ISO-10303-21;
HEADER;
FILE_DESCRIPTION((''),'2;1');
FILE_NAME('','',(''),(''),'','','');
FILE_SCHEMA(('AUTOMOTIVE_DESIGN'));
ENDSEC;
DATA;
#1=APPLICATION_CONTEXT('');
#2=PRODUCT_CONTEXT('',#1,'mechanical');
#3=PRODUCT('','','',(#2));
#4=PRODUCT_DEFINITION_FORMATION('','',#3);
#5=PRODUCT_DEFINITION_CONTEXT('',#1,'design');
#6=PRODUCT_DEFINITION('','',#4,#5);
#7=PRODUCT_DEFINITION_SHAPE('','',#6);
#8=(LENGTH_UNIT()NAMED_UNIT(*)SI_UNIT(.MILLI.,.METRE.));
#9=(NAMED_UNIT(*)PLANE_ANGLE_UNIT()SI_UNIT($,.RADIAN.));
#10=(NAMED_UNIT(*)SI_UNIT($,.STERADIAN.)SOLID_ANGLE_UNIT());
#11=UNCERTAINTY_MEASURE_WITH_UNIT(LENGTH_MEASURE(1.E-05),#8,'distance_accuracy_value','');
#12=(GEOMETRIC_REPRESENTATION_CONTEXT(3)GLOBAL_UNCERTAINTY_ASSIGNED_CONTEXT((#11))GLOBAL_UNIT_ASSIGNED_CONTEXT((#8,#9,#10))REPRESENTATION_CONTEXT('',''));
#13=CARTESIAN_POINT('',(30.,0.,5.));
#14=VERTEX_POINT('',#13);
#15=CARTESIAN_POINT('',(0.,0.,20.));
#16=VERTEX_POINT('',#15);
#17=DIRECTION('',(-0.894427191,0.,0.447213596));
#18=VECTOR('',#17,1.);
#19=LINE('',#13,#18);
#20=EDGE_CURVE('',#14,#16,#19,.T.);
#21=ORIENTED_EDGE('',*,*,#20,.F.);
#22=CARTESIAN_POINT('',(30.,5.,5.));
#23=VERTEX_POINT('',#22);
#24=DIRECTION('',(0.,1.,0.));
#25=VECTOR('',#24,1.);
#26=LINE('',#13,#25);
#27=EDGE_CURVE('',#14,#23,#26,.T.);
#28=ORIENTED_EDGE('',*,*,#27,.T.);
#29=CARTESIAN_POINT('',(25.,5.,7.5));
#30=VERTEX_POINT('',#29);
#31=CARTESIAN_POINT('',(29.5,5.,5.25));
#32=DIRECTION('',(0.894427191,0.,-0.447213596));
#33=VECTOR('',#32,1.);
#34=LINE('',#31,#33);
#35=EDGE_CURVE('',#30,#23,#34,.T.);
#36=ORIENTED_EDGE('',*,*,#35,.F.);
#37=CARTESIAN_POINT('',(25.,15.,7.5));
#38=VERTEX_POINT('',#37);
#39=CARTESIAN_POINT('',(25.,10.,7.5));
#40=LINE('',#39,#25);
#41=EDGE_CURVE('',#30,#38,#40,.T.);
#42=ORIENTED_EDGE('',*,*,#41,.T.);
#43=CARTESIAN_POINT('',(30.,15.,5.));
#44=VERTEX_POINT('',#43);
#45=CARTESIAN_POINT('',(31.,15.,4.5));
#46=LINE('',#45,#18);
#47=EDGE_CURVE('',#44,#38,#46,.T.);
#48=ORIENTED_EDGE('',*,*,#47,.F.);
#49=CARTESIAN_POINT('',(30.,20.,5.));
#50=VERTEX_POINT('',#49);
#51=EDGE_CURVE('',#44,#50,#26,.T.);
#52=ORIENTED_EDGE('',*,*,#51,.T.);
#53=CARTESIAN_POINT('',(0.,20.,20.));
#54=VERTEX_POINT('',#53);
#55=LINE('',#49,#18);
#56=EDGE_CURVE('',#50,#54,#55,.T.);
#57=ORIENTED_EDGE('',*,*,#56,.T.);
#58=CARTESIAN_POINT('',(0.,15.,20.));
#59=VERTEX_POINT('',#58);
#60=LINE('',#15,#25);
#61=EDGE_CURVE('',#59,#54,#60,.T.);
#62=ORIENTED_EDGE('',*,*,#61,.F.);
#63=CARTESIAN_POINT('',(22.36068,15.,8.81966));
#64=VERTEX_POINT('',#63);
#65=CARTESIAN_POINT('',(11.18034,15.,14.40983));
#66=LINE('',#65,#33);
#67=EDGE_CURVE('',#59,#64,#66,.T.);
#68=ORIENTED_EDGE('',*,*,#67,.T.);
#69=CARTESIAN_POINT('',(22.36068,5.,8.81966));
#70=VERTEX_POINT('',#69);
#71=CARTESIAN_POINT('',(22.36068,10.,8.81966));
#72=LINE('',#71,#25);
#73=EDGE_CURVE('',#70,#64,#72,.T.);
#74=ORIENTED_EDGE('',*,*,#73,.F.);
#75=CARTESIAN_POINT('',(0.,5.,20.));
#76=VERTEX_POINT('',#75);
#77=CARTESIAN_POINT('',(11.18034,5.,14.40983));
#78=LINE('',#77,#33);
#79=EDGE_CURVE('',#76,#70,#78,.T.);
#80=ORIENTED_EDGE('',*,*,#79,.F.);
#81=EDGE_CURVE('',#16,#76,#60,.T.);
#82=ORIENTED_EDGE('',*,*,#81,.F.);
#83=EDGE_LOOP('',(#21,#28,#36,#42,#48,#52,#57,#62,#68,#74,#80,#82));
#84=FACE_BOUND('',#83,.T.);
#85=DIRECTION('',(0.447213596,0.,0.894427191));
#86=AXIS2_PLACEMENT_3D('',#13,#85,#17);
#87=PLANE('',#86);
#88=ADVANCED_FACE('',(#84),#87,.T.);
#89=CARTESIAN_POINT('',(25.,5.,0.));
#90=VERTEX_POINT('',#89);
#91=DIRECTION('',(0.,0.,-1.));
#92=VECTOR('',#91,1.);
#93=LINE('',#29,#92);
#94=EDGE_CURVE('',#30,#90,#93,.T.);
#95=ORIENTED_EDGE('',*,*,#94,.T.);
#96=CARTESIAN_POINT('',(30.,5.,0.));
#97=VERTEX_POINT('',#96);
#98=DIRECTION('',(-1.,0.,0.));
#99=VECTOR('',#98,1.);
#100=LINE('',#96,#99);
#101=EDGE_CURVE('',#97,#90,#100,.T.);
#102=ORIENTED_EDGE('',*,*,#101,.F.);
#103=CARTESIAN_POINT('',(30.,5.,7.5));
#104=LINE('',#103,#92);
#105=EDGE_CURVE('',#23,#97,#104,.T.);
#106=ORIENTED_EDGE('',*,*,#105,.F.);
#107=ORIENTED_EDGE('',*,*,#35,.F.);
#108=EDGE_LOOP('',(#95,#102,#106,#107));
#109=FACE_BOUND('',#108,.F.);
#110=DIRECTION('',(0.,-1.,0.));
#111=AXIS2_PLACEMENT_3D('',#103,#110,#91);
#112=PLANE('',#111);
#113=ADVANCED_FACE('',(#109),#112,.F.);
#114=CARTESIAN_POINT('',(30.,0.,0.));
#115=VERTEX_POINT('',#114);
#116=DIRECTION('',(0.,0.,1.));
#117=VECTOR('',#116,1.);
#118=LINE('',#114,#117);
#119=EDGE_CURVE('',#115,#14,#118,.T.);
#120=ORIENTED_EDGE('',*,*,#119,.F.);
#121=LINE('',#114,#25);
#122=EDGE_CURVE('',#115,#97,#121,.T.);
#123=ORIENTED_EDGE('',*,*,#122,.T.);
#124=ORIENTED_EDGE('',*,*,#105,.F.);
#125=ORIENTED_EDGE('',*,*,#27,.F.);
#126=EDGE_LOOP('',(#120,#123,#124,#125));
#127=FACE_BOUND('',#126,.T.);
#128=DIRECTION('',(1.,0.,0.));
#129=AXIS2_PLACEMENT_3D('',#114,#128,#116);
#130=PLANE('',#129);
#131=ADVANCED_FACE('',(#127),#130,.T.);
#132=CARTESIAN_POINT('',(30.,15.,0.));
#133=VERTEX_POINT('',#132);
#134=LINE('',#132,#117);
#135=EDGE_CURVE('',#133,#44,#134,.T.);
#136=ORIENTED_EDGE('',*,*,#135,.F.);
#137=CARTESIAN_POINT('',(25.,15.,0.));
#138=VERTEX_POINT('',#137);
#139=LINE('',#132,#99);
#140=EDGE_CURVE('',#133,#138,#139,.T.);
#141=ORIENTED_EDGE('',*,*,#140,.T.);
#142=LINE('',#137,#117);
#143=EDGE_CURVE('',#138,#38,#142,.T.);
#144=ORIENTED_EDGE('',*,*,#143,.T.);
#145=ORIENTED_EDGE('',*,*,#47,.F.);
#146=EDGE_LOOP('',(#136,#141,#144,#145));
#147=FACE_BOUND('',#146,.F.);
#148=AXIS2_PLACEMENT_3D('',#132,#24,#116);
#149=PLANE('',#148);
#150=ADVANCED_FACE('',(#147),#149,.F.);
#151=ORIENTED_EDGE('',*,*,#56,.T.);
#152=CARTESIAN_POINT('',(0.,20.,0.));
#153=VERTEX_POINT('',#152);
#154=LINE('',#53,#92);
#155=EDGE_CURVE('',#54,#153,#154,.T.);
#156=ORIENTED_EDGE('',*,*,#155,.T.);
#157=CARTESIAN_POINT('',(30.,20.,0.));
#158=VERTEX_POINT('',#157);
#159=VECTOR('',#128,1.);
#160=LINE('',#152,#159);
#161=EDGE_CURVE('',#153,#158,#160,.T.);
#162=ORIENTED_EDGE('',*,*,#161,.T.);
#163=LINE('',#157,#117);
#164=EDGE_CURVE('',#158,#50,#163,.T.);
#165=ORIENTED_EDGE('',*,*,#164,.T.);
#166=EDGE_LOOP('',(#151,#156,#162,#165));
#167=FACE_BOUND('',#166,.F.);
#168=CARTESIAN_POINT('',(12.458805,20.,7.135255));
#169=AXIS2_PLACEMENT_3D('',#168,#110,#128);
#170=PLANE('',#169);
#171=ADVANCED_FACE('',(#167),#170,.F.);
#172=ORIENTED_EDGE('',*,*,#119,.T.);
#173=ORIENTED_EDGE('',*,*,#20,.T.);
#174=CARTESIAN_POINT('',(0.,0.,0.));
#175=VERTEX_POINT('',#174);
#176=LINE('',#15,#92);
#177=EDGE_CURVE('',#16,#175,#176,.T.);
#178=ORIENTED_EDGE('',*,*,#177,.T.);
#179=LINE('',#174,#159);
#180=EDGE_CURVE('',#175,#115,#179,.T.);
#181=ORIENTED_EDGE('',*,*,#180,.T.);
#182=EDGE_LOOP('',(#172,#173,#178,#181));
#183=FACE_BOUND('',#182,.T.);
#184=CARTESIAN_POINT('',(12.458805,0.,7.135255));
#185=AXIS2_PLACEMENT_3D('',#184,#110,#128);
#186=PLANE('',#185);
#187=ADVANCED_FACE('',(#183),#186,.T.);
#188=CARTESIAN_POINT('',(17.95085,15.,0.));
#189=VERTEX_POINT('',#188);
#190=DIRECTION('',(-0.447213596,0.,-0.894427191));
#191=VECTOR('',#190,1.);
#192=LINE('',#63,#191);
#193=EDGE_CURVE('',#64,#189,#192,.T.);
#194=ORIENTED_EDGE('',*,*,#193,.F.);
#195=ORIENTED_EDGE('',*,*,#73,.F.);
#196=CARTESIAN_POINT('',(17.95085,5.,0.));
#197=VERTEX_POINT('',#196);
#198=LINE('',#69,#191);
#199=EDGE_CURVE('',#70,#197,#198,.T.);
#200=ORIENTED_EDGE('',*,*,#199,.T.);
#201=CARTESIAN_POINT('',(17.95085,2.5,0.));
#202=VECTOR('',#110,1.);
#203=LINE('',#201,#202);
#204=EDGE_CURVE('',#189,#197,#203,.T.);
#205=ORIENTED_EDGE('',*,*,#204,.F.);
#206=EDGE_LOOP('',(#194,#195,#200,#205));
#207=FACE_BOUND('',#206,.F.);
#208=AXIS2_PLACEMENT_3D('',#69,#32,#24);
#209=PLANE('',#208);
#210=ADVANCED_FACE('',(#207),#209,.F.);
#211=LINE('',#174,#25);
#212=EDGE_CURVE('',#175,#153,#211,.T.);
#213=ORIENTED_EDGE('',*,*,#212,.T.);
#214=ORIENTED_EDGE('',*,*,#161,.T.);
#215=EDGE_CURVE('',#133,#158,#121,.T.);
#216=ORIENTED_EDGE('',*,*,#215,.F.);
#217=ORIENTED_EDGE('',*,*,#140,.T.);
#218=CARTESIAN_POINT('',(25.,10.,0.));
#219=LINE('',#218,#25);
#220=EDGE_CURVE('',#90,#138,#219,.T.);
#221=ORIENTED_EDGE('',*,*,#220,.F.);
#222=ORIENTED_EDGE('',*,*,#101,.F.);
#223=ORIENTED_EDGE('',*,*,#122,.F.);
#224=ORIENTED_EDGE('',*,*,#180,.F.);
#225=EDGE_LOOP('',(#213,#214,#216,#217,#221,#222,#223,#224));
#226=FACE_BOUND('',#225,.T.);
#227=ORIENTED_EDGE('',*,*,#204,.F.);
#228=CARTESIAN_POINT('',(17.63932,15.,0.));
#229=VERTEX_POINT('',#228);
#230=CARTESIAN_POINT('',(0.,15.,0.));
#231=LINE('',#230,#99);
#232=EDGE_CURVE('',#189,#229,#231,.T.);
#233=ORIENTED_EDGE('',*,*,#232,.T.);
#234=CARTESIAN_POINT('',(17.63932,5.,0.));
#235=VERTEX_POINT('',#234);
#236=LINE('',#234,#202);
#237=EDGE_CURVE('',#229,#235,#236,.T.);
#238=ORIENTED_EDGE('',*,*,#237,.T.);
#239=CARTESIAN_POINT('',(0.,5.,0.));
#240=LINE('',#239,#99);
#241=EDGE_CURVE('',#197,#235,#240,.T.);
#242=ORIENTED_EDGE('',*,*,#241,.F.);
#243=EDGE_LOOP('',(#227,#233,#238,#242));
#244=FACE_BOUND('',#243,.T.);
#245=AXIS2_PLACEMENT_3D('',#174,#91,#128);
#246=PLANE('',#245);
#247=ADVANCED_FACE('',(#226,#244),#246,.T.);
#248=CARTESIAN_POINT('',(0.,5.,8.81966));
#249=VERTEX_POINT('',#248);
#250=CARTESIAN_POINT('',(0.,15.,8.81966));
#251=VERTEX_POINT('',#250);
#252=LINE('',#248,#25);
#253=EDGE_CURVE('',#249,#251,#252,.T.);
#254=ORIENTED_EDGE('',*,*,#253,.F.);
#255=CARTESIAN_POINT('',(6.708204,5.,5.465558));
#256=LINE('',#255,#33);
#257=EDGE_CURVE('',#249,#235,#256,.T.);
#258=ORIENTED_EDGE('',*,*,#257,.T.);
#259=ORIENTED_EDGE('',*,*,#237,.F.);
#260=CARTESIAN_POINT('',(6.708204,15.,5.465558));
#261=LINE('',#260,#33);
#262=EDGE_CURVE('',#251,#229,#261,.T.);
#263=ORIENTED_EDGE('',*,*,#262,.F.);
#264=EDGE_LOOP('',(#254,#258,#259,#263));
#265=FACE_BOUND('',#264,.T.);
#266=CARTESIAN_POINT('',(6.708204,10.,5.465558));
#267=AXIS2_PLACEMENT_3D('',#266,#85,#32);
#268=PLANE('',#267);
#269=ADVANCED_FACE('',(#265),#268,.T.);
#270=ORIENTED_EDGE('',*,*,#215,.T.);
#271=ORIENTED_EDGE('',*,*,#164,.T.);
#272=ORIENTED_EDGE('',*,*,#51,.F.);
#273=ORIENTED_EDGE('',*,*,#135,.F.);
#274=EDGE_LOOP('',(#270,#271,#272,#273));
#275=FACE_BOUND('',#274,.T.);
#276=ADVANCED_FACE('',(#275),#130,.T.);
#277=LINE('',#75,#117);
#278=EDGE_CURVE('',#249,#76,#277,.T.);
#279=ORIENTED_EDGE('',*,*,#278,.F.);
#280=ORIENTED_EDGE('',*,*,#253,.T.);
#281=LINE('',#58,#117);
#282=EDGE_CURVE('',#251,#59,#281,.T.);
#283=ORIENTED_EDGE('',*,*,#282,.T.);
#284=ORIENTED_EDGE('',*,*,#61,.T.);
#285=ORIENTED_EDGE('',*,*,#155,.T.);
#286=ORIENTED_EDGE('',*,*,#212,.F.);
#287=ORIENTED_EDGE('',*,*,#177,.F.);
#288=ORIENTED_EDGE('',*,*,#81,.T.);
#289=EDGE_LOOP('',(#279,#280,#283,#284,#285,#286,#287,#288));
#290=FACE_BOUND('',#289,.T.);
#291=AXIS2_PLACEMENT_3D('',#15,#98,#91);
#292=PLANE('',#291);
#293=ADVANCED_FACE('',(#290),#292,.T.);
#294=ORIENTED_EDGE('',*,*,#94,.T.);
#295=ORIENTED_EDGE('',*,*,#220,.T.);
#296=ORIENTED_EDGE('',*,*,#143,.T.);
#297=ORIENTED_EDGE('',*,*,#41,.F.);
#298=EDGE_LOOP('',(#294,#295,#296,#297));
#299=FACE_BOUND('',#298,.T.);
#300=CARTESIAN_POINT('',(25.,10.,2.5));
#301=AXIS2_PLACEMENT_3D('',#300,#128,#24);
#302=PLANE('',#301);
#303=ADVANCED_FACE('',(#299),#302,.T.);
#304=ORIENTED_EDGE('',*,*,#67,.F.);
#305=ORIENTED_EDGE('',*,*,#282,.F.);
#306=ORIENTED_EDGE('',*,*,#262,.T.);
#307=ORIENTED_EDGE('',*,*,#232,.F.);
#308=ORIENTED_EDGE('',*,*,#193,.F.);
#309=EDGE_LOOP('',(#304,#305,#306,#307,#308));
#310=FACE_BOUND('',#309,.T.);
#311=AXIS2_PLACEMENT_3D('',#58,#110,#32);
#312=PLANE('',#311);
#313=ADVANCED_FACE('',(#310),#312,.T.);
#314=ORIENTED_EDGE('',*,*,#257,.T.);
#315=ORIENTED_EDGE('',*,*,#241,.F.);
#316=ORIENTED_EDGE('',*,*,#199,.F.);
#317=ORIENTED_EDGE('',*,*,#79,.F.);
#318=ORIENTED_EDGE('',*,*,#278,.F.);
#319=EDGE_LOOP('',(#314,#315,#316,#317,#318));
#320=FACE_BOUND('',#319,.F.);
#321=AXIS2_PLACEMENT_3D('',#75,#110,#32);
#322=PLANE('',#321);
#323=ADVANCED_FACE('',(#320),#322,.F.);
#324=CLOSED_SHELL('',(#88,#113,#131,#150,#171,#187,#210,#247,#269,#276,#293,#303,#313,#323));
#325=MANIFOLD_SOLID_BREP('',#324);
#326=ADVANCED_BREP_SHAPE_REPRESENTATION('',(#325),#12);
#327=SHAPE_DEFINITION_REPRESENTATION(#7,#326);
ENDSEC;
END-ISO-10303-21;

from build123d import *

# Parameters (mm, degrees)
F1_DEPTH = 20
F2_W     = 25
F2_H     = 10
F3_DEPTH = 10
F4_W     = 10
F4_H     = 5
F4_H_2   = 2.5
F5_DEPTH = 5


with BuildPart() as f1:
    # F0 (on Front) → F1 (new body)
    with BuildSketch(Plane.XZ):
        Polygon((30, 5), (0, 20), (0, 0), (30, 0), align=None)
    extrude(amount=-F1_DEPTH)

    # F2 (on face) → F3 (cut)
    with BuildSketch(Plane(origin=(8, 0, 16), x_dir=(0.894427191, 0, -0.4472135955), z_dir=(0.4472135955, 0, 0.894427191))):
        with Locations((3.55572809, 10)):
            Rectangle(F2_W, F2_H)
    extrude(amount=-F3_DEPTH, mode=Mode.SUBTRACT)

    # F4 (on face) → F5 (cut)
    with BuildSketch(Plane.YZ.offset(30)):
        with Locations((10, 2.5)):
            Rectangle(F4_W, F4_H)
        with Locations((10, 6.25)):
            Rectangle(F4_W, F4_H_2)
    extrude(amount=-F5_DEPTH, mode=Mode.SUBTRACT)


solid = f1.part
